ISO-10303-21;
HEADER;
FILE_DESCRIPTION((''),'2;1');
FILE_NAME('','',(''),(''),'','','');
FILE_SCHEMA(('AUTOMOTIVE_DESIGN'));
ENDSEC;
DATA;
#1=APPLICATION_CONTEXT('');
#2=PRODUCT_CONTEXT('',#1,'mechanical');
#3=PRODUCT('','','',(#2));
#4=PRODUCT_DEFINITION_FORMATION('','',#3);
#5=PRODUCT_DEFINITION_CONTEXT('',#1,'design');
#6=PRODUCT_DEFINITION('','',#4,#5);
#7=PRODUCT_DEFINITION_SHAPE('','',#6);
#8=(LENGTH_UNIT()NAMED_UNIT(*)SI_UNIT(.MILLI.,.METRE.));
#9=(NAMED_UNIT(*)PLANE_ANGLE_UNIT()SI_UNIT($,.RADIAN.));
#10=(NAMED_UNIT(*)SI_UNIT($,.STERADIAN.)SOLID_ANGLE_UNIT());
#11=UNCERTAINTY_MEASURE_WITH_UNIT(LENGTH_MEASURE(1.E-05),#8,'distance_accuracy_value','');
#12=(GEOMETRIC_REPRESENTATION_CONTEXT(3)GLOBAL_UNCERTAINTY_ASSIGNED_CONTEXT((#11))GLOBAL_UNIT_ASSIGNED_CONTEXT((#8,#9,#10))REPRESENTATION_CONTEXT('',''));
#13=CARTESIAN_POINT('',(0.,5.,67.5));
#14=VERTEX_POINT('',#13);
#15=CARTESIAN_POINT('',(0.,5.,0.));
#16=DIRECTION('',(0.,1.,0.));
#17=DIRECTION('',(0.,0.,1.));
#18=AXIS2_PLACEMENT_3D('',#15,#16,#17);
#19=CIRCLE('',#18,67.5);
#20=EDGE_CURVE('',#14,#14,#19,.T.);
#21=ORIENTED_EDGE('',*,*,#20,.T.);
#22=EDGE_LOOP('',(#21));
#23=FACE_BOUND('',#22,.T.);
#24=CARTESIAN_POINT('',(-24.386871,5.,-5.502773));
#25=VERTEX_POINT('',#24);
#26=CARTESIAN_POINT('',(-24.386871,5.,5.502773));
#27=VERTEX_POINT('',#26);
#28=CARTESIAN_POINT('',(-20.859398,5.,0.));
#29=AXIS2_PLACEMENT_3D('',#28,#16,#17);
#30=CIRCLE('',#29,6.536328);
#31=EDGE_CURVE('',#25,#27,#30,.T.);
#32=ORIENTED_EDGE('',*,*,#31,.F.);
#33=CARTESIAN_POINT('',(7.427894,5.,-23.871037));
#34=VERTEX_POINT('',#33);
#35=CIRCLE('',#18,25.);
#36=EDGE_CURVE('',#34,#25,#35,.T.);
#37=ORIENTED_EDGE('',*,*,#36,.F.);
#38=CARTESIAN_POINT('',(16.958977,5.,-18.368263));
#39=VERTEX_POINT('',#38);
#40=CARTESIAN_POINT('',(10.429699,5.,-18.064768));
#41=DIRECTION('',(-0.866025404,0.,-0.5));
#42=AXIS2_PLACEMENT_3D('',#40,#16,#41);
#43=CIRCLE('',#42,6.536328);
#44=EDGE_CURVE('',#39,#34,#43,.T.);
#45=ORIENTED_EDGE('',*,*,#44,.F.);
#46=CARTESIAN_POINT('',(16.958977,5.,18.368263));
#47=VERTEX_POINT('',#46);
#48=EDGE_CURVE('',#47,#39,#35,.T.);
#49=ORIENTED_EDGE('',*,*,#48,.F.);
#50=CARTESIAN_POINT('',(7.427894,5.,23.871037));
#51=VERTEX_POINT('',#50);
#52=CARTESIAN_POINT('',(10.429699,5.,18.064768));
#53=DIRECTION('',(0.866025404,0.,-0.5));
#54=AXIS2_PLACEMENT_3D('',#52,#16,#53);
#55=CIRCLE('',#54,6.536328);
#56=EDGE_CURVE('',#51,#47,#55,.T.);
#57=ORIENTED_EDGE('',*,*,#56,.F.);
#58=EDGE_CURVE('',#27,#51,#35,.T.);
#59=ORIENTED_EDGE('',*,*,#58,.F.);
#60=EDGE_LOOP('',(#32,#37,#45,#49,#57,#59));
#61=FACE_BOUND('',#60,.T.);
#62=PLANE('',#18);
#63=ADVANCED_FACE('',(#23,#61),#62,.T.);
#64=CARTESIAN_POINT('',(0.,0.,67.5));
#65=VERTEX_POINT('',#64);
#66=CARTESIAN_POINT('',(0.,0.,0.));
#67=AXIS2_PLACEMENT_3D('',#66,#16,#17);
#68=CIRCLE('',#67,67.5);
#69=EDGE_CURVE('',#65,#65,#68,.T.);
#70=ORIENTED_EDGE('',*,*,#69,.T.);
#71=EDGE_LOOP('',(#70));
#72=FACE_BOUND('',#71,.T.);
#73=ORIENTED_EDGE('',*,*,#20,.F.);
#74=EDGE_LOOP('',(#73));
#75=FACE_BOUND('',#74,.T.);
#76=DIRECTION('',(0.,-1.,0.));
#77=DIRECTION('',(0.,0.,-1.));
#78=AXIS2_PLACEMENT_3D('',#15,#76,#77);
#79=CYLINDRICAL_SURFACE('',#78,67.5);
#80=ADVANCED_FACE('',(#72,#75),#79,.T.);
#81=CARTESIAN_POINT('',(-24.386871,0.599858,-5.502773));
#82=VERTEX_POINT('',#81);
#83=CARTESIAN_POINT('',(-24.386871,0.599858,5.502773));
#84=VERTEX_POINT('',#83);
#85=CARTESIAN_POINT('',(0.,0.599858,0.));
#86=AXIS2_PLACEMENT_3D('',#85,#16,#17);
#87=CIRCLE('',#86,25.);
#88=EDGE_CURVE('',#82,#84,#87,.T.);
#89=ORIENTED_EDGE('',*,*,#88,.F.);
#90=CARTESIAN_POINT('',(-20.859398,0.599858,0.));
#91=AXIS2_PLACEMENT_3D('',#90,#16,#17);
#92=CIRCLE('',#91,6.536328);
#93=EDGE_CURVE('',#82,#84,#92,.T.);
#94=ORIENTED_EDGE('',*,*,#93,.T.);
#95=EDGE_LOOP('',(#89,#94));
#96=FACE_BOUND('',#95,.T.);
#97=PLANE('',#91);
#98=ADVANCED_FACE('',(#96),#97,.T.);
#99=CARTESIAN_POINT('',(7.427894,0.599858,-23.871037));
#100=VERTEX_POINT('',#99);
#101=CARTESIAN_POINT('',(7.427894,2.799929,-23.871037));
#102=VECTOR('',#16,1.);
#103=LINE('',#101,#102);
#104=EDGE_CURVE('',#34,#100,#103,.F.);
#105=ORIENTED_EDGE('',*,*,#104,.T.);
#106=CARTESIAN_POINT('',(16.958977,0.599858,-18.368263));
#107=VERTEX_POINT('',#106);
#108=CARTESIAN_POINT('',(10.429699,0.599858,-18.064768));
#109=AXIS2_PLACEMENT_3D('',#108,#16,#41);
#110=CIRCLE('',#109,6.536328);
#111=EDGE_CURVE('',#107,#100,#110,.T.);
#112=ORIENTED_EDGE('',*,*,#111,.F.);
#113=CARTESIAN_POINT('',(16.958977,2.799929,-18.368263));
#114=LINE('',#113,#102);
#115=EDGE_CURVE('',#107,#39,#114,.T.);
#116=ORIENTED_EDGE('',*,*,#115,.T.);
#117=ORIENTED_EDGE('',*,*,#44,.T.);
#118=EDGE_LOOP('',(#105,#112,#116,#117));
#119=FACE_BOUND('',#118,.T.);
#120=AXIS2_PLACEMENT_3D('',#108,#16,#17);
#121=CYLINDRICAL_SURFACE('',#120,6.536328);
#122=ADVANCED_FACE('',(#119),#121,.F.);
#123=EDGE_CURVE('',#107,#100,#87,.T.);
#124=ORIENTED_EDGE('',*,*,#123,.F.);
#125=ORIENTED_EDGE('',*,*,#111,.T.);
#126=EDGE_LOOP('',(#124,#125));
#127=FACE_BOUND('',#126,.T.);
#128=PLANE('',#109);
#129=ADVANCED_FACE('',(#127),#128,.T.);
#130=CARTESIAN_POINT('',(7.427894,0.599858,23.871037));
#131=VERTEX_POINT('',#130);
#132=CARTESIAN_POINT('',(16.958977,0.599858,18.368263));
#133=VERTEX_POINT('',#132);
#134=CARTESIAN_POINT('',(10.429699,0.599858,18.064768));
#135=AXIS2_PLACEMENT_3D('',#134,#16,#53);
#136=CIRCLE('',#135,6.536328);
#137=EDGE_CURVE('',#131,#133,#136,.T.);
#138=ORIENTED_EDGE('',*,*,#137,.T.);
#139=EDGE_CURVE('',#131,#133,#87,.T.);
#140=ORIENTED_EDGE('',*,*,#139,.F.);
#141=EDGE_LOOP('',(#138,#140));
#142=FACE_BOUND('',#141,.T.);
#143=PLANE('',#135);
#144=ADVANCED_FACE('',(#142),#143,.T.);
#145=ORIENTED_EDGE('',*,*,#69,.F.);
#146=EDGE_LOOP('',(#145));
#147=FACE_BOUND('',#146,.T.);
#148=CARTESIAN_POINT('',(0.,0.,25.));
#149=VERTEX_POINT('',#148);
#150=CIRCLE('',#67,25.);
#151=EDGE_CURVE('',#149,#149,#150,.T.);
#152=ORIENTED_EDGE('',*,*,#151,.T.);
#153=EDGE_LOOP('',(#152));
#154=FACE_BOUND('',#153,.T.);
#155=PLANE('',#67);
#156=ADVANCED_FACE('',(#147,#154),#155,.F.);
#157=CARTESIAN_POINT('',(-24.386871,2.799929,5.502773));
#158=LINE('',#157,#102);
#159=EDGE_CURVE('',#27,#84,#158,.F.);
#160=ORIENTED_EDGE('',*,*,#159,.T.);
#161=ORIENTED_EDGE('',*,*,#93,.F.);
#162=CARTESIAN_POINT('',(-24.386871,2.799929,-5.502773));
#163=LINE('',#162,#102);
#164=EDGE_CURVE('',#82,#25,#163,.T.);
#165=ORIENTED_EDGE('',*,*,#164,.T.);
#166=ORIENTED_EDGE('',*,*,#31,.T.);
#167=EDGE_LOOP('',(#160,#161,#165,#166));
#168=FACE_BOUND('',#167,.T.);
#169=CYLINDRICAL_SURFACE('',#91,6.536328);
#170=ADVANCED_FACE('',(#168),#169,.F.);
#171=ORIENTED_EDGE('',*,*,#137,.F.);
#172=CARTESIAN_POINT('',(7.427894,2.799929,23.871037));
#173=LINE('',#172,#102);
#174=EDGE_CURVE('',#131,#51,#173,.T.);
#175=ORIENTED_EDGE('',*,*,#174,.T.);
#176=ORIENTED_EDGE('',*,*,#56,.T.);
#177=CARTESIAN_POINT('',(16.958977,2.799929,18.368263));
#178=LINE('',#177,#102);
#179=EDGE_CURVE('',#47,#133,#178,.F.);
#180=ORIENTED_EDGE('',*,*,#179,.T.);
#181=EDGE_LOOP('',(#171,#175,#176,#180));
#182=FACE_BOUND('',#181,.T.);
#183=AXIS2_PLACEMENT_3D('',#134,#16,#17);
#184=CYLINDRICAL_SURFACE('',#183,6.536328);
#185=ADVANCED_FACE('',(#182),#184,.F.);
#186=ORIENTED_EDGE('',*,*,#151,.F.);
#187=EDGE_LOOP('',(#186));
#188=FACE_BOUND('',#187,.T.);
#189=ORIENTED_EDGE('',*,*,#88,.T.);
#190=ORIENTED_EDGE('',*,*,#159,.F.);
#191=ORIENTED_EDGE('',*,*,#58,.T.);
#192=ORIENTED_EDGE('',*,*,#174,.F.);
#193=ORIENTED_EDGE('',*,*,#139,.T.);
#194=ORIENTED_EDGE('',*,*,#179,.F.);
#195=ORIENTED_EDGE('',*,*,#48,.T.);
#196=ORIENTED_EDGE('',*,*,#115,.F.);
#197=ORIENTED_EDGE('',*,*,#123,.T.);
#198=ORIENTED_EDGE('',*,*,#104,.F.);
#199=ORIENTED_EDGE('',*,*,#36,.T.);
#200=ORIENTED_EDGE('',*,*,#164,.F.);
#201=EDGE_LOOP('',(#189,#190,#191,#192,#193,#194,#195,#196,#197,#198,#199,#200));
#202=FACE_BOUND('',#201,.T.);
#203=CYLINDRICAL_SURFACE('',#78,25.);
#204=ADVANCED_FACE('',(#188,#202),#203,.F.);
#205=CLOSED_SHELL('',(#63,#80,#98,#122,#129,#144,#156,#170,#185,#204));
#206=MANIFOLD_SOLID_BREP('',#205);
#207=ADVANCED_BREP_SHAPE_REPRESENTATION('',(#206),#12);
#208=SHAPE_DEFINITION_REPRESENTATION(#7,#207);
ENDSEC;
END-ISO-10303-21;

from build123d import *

# Parameters (mm, degrees)
SKETCH1_R           = 67.5
BOSS_EXTRUDE1_DEPTH = 5
SKETCH2_R           = 25
CUT_EXTRUDE1_DEPTH  = 96.590271472
SKETCH3_R           = 6.536327821
CUT_EXTRUDE2_DEPTH  = 4.400142072
CIRPATTERN1_COUNT   = 3


with BuildPart() as part:
    # Sketch1 → Boss-Extrude1 (new body)
    with BuildSketch(Plane(origin=(0, 0, 0), x_dir=(1, 0, 0), z_dir=(0, 1, 0))):
        Circle(SKETCH1_R)
    extrude(amount=BOSS_EXTRUDE1_DEPTH)

    # Sketch2 → Cut-Extrude1 (cut, through all)
    with BuildSketch(Plane(origin=(0, 0, 0), x_dir=(1, 0, 0), z_dir=(0, 1, 0))):
        Circle(SKETCH2_R)
    extrude(amount=CUT_EXTRUDE1_DEPTH, mode=Mode.SUBTRACT)

    # Sketch3 → Cut-Extrude2 (cut)
    with BuildSketch(Plane(origin=(0, 5, 0), x_dir=(1, 0, 0), z_dir=(0, 1, 0))):
        with Locations((-20.859397748, 0)):
            Circle(SKETCH3_R)
    cut_extrude2 = extrude(amount=-CUT_EXTRUDE2_DEPTH, mode=Mode.SUBTRACT)

    # CirPattern1: Cut-Extrude2 ×3 about axis
    cirpattern1_axis = Axis((0, 0, 0), (0, 1, 0))
    for i in range(1, CIRPATTERN1_COUNT):
        add(cut_extrude2.rotate(cirpattern1_axis, i * 360 / CIRPATTERN1_COUNT), mode=Mode.SUBTRACT)


solid = part.part
